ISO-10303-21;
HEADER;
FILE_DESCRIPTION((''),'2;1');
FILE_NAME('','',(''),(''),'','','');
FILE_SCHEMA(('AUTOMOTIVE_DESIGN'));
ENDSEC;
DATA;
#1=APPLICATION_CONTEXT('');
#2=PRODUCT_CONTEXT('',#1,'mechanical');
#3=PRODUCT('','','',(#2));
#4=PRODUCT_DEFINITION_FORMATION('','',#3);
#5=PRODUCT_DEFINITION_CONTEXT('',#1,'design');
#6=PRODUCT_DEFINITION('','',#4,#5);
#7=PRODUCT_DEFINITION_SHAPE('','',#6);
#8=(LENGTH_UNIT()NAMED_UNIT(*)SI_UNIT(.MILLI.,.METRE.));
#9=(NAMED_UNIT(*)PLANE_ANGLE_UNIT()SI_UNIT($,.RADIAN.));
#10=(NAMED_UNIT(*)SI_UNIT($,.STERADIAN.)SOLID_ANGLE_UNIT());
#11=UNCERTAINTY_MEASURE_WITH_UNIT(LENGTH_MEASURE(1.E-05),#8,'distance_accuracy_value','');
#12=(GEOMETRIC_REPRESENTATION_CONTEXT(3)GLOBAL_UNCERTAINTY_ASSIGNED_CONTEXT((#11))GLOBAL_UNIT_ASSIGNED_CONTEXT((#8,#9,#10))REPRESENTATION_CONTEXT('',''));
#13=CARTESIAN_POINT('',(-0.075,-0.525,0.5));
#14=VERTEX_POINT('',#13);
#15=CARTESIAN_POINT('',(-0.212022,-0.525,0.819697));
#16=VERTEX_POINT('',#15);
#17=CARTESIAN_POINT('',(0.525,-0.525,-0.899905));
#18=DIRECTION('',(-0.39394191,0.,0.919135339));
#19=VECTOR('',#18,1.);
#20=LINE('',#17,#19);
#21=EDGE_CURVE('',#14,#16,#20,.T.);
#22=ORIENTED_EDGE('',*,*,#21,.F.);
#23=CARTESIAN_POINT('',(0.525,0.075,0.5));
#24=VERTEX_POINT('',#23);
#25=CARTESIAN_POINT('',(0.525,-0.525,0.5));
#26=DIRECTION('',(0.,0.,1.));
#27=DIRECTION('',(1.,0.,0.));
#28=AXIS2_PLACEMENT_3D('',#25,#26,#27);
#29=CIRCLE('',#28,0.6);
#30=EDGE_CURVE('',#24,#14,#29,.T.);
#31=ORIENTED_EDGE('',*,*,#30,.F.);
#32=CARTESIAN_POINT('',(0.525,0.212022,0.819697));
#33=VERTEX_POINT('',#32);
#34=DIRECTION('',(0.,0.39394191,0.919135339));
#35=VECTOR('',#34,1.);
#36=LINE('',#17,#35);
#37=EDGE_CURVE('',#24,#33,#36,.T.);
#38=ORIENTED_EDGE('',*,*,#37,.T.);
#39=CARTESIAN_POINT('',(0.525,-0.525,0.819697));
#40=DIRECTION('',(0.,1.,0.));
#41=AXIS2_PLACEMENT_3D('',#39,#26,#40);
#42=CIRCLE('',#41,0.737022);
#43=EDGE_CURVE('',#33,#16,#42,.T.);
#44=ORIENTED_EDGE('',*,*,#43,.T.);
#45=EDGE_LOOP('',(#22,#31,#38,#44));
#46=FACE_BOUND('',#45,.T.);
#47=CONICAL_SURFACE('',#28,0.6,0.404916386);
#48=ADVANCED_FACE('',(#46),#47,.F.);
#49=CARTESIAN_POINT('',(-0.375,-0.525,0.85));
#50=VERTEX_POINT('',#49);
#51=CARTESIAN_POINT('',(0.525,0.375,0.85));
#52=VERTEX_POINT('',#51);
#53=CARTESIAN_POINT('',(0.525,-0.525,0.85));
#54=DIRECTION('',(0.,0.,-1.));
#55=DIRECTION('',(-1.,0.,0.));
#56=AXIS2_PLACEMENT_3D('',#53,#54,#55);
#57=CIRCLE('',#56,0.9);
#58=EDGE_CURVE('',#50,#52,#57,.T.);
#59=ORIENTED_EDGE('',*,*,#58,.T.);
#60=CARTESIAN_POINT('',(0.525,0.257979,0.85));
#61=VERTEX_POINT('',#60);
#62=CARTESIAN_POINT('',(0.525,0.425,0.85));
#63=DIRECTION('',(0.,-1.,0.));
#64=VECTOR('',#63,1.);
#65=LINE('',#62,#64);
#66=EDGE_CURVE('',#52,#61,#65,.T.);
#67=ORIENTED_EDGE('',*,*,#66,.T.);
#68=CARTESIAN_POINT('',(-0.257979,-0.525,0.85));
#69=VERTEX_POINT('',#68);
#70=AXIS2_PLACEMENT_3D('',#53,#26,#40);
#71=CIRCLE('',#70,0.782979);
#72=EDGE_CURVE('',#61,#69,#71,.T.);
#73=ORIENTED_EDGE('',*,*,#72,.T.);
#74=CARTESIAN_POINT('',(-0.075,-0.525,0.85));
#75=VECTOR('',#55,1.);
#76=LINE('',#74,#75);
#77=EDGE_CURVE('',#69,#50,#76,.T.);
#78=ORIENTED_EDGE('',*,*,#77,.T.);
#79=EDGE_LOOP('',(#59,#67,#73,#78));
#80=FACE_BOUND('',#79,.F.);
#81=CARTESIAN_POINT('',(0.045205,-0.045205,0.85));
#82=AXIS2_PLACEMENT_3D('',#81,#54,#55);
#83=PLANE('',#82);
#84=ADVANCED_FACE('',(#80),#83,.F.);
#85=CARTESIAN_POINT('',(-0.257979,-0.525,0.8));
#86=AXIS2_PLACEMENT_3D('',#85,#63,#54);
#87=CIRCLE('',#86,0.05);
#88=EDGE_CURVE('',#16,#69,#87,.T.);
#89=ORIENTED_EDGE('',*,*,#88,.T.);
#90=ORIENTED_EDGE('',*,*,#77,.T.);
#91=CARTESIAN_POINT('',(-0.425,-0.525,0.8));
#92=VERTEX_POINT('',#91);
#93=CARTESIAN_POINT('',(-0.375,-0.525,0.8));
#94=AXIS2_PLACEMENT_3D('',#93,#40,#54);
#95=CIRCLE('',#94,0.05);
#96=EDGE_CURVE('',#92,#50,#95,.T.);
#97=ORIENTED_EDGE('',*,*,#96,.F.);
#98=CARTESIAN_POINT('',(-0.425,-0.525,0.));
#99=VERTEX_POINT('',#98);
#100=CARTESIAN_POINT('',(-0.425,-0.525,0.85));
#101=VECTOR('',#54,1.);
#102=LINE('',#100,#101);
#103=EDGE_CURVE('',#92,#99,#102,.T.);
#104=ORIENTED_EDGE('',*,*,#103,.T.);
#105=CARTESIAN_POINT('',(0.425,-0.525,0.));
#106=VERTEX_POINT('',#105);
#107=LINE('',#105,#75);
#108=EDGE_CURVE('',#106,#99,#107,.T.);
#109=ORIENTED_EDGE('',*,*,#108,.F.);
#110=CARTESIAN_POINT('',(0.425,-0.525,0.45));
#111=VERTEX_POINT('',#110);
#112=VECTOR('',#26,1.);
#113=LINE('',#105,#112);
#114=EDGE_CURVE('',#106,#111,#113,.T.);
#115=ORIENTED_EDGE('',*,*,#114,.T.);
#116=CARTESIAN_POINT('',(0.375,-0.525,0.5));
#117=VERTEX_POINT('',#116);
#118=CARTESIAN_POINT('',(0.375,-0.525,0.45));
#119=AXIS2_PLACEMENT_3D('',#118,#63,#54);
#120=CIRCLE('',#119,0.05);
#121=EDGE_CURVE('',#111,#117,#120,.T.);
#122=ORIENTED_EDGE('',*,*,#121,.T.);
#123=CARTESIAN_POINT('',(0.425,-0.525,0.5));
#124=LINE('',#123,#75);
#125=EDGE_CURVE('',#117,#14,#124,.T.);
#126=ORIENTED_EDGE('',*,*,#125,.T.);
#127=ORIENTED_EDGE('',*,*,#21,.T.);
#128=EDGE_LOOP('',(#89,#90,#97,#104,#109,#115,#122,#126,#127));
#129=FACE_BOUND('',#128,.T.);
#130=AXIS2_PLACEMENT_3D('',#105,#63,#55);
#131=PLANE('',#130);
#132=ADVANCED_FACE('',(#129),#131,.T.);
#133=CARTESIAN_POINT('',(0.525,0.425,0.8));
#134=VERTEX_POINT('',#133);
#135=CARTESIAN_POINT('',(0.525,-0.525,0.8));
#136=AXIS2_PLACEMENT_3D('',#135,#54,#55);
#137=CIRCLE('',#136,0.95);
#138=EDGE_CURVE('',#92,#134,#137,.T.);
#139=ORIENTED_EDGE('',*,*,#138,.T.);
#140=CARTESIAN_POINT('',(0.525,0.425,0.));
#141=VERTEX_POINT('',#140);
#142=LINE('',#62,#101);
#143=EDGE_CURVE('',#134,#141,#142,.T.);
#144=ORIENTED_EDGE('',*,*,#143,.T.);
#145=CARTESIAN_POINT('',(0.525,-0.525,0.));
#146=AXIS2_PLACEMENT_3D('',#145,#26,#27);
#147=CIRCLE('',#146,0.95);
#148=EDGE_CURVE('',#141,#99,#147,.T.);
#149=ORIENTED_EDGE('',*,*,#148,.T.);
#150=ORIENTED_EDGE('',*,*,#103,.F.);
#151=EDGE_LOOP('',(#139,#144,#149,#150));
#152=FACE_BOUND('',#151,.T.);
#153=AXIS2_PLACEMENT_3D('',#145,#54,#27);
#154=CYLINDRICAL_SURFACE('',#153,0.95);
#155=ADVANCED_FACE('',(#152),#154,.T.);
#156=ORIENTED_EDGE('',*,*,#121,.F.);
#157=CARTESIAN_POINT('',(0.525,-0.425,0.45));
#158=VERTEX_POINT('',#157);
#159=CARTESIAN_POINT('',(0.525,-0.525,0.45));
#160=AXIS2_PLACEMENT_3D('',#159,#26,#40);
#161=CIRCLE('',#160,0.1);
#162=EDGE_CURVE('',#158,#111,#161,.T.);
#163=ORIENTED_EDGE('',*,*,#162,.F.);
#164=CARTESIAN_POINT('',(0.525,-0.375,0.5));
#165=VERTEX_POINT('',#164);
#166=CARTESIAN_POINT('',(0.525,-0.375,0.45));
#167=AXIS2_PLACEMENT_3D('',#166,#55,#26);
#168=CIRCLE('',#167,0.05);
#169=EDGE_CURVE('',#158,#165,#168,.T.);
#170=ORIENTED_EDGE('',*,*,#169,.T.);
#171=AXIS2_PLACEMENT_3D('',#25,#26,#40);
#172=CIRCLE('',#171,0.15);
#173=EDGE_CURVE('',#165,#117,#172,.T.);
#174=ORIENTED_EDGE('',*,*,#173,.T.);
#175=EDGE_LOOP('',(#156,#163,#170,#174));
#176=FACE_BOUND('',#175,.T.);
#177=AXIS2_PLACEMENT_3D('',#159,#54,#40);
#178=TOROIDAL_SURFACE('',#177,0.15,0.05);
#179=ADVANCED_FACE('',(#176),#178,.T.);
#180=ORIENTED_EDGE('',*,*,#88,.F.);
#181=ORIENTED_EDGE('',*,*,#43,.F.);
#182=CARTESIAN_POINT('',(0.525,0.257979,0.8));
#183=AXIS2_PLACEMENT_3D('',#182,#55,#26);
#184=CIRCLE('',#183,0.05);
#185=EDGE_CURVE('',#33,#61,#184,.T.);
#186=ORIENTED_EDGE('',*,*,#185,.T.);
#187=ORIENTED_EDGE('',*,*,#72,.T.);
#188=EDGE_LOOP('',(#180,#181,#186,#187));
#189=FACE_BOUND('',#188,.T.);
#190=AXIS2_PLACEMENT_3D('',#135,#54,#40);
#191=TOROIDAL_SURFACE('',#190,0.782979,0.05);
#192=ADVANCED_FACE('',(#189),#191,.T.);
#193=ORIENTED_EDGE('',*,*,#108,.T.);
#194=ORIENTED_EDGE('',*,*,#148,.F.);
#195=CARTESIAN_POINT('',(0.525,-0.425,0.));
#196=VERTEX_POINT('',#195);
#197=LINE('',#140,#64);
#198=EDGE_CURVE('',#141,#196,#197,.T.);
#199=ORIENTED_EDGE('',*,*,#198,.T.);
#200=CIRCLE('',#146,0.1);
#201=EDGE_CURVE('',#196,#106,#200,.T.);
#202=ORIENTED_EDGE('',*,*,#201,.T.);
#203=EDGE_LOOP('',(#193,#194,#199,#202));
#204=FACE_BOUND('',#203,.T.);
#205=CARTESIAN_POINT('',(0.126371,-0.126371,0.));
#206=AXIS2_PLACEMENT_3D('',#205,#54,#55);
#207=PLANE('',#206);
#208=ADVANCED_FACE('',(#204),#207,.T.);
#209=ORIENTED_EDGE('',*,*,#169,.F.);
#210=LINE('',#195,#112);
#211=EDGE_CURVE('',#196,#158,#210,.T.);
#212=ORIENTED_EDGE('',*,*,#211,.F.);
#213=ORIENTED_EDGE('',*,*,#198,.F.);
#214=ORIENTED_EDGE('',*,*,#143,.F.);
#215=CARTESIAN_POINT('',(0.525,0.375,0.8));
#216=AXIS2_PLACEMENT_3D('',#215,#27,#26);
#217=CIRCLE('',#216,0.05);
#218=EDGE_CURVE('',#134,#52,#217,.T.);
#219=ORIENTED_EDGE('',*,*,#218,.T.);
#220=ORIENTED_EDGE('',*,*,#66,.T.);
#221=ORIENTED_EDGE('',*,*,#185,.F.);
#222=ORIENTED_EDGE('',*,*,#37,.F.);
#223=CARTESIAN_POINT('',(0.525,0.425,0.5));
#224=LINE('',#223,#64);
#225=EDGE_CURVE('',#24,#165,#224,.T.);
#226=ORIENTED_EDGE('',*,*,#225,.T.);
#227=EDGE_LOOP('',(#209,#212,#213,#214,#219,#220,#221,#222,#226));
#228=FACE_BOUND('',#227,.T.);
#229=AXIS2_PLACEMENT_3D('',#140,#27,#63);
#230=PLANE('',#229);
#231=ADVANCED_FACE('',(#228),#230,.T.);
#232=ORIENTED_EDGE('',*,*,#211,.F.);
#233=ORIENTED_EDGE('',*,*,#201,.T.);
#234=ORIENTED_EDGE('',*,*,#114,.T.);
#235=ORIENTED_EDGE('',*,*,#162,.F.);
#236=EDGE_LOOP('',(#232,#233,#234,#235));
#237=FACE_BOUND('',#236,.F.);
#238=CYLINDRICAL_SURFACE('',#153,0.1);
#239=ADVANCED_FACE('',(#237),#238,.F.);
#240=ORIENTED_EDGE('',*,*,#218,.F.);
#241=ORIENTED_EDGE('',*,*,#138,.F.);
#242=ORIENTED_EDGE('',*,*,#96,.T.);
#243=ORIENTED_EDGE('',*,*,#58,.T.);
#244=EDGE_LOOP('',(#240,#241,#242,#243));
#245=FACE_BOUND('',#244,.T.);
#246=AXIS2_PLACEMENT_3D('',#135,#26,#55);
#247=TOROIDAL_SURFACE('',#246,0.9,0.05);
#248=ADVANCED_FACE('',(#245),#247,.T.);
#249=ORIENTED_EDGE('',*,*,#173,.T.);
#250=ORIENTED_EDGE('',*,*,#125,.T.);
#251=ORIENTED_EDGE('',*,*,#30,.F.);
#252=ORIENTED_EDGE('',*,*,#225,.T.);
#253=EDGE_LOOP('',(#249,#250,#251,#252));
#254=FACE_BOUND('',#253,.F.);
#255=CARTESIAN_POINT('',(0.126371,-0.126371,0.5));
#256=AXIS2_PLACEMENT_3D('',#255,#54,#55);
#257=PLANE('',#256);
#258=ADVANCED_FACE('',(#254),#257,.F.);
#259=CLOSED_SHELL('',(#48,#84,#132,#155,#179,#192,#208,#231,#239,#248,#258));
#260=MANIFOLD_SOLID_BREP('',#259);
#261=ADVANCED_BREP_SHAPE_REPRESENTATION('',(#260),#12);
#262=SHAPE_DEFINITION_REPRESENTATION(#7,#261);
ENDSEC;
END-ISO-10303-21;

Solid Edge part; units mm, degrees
sketch "Sketch1" plane through (0, 0, 0) normal (0, 0, 1) x (1, 0, 0)
  line L0 (0.425, -0.525) -> (-0.425, -0.525)
  arc A0 (0.525, 0.425) -> (-0.425, -0.525) centre (0.525, -0.525) ccw
  line L1 (0.525, 0.425) -> (0.525, -0.425)
  arc A1 (0.525, -0.425) -> (0.425, -0.525) centre (0.525, -0.525) ccw
  dimension "D1" = 0.525
extrude "Protrusion1" add sketch "Sketch1" along normal blind 0.5
sketch "Sketch2" plane through (0.05, -0.05, 0.5) normal (0, 0, 1) x (1, 0, 0)
  arc A0 (-0.475, -0.475) -> (0.475, 0.475) centre (0.475, -0.475) cw
  line L0 (0.475, 0.475) -> (0.475, 0.125)
  line L1 (-0.125, -0.475) -> (-0.475, -0.475)
  arc A1 (0.475, 0.125) -> (-0.125, -0.475) centre (0.475, -0.475) ccw
  dimension "D1" = 0.35
extrude "Ausprägung_2" add sketch "Sketch2" along normal blind 0.35
draft "Formschräge_2" angle 23.2 neutral plane through (0.225, -0.225, 0.5) normal (0, 0, 1) pull direction (0, 0, 1) face at (0.3788, 0.0569, 0.7882)
fillet "Verrundung_1" radius 0.05 3 edges at (-0.0053, 0.0053, 0.85) (0.4543, -0.4543, 0.5) (-0.1468, 0.1468, 0.85)
